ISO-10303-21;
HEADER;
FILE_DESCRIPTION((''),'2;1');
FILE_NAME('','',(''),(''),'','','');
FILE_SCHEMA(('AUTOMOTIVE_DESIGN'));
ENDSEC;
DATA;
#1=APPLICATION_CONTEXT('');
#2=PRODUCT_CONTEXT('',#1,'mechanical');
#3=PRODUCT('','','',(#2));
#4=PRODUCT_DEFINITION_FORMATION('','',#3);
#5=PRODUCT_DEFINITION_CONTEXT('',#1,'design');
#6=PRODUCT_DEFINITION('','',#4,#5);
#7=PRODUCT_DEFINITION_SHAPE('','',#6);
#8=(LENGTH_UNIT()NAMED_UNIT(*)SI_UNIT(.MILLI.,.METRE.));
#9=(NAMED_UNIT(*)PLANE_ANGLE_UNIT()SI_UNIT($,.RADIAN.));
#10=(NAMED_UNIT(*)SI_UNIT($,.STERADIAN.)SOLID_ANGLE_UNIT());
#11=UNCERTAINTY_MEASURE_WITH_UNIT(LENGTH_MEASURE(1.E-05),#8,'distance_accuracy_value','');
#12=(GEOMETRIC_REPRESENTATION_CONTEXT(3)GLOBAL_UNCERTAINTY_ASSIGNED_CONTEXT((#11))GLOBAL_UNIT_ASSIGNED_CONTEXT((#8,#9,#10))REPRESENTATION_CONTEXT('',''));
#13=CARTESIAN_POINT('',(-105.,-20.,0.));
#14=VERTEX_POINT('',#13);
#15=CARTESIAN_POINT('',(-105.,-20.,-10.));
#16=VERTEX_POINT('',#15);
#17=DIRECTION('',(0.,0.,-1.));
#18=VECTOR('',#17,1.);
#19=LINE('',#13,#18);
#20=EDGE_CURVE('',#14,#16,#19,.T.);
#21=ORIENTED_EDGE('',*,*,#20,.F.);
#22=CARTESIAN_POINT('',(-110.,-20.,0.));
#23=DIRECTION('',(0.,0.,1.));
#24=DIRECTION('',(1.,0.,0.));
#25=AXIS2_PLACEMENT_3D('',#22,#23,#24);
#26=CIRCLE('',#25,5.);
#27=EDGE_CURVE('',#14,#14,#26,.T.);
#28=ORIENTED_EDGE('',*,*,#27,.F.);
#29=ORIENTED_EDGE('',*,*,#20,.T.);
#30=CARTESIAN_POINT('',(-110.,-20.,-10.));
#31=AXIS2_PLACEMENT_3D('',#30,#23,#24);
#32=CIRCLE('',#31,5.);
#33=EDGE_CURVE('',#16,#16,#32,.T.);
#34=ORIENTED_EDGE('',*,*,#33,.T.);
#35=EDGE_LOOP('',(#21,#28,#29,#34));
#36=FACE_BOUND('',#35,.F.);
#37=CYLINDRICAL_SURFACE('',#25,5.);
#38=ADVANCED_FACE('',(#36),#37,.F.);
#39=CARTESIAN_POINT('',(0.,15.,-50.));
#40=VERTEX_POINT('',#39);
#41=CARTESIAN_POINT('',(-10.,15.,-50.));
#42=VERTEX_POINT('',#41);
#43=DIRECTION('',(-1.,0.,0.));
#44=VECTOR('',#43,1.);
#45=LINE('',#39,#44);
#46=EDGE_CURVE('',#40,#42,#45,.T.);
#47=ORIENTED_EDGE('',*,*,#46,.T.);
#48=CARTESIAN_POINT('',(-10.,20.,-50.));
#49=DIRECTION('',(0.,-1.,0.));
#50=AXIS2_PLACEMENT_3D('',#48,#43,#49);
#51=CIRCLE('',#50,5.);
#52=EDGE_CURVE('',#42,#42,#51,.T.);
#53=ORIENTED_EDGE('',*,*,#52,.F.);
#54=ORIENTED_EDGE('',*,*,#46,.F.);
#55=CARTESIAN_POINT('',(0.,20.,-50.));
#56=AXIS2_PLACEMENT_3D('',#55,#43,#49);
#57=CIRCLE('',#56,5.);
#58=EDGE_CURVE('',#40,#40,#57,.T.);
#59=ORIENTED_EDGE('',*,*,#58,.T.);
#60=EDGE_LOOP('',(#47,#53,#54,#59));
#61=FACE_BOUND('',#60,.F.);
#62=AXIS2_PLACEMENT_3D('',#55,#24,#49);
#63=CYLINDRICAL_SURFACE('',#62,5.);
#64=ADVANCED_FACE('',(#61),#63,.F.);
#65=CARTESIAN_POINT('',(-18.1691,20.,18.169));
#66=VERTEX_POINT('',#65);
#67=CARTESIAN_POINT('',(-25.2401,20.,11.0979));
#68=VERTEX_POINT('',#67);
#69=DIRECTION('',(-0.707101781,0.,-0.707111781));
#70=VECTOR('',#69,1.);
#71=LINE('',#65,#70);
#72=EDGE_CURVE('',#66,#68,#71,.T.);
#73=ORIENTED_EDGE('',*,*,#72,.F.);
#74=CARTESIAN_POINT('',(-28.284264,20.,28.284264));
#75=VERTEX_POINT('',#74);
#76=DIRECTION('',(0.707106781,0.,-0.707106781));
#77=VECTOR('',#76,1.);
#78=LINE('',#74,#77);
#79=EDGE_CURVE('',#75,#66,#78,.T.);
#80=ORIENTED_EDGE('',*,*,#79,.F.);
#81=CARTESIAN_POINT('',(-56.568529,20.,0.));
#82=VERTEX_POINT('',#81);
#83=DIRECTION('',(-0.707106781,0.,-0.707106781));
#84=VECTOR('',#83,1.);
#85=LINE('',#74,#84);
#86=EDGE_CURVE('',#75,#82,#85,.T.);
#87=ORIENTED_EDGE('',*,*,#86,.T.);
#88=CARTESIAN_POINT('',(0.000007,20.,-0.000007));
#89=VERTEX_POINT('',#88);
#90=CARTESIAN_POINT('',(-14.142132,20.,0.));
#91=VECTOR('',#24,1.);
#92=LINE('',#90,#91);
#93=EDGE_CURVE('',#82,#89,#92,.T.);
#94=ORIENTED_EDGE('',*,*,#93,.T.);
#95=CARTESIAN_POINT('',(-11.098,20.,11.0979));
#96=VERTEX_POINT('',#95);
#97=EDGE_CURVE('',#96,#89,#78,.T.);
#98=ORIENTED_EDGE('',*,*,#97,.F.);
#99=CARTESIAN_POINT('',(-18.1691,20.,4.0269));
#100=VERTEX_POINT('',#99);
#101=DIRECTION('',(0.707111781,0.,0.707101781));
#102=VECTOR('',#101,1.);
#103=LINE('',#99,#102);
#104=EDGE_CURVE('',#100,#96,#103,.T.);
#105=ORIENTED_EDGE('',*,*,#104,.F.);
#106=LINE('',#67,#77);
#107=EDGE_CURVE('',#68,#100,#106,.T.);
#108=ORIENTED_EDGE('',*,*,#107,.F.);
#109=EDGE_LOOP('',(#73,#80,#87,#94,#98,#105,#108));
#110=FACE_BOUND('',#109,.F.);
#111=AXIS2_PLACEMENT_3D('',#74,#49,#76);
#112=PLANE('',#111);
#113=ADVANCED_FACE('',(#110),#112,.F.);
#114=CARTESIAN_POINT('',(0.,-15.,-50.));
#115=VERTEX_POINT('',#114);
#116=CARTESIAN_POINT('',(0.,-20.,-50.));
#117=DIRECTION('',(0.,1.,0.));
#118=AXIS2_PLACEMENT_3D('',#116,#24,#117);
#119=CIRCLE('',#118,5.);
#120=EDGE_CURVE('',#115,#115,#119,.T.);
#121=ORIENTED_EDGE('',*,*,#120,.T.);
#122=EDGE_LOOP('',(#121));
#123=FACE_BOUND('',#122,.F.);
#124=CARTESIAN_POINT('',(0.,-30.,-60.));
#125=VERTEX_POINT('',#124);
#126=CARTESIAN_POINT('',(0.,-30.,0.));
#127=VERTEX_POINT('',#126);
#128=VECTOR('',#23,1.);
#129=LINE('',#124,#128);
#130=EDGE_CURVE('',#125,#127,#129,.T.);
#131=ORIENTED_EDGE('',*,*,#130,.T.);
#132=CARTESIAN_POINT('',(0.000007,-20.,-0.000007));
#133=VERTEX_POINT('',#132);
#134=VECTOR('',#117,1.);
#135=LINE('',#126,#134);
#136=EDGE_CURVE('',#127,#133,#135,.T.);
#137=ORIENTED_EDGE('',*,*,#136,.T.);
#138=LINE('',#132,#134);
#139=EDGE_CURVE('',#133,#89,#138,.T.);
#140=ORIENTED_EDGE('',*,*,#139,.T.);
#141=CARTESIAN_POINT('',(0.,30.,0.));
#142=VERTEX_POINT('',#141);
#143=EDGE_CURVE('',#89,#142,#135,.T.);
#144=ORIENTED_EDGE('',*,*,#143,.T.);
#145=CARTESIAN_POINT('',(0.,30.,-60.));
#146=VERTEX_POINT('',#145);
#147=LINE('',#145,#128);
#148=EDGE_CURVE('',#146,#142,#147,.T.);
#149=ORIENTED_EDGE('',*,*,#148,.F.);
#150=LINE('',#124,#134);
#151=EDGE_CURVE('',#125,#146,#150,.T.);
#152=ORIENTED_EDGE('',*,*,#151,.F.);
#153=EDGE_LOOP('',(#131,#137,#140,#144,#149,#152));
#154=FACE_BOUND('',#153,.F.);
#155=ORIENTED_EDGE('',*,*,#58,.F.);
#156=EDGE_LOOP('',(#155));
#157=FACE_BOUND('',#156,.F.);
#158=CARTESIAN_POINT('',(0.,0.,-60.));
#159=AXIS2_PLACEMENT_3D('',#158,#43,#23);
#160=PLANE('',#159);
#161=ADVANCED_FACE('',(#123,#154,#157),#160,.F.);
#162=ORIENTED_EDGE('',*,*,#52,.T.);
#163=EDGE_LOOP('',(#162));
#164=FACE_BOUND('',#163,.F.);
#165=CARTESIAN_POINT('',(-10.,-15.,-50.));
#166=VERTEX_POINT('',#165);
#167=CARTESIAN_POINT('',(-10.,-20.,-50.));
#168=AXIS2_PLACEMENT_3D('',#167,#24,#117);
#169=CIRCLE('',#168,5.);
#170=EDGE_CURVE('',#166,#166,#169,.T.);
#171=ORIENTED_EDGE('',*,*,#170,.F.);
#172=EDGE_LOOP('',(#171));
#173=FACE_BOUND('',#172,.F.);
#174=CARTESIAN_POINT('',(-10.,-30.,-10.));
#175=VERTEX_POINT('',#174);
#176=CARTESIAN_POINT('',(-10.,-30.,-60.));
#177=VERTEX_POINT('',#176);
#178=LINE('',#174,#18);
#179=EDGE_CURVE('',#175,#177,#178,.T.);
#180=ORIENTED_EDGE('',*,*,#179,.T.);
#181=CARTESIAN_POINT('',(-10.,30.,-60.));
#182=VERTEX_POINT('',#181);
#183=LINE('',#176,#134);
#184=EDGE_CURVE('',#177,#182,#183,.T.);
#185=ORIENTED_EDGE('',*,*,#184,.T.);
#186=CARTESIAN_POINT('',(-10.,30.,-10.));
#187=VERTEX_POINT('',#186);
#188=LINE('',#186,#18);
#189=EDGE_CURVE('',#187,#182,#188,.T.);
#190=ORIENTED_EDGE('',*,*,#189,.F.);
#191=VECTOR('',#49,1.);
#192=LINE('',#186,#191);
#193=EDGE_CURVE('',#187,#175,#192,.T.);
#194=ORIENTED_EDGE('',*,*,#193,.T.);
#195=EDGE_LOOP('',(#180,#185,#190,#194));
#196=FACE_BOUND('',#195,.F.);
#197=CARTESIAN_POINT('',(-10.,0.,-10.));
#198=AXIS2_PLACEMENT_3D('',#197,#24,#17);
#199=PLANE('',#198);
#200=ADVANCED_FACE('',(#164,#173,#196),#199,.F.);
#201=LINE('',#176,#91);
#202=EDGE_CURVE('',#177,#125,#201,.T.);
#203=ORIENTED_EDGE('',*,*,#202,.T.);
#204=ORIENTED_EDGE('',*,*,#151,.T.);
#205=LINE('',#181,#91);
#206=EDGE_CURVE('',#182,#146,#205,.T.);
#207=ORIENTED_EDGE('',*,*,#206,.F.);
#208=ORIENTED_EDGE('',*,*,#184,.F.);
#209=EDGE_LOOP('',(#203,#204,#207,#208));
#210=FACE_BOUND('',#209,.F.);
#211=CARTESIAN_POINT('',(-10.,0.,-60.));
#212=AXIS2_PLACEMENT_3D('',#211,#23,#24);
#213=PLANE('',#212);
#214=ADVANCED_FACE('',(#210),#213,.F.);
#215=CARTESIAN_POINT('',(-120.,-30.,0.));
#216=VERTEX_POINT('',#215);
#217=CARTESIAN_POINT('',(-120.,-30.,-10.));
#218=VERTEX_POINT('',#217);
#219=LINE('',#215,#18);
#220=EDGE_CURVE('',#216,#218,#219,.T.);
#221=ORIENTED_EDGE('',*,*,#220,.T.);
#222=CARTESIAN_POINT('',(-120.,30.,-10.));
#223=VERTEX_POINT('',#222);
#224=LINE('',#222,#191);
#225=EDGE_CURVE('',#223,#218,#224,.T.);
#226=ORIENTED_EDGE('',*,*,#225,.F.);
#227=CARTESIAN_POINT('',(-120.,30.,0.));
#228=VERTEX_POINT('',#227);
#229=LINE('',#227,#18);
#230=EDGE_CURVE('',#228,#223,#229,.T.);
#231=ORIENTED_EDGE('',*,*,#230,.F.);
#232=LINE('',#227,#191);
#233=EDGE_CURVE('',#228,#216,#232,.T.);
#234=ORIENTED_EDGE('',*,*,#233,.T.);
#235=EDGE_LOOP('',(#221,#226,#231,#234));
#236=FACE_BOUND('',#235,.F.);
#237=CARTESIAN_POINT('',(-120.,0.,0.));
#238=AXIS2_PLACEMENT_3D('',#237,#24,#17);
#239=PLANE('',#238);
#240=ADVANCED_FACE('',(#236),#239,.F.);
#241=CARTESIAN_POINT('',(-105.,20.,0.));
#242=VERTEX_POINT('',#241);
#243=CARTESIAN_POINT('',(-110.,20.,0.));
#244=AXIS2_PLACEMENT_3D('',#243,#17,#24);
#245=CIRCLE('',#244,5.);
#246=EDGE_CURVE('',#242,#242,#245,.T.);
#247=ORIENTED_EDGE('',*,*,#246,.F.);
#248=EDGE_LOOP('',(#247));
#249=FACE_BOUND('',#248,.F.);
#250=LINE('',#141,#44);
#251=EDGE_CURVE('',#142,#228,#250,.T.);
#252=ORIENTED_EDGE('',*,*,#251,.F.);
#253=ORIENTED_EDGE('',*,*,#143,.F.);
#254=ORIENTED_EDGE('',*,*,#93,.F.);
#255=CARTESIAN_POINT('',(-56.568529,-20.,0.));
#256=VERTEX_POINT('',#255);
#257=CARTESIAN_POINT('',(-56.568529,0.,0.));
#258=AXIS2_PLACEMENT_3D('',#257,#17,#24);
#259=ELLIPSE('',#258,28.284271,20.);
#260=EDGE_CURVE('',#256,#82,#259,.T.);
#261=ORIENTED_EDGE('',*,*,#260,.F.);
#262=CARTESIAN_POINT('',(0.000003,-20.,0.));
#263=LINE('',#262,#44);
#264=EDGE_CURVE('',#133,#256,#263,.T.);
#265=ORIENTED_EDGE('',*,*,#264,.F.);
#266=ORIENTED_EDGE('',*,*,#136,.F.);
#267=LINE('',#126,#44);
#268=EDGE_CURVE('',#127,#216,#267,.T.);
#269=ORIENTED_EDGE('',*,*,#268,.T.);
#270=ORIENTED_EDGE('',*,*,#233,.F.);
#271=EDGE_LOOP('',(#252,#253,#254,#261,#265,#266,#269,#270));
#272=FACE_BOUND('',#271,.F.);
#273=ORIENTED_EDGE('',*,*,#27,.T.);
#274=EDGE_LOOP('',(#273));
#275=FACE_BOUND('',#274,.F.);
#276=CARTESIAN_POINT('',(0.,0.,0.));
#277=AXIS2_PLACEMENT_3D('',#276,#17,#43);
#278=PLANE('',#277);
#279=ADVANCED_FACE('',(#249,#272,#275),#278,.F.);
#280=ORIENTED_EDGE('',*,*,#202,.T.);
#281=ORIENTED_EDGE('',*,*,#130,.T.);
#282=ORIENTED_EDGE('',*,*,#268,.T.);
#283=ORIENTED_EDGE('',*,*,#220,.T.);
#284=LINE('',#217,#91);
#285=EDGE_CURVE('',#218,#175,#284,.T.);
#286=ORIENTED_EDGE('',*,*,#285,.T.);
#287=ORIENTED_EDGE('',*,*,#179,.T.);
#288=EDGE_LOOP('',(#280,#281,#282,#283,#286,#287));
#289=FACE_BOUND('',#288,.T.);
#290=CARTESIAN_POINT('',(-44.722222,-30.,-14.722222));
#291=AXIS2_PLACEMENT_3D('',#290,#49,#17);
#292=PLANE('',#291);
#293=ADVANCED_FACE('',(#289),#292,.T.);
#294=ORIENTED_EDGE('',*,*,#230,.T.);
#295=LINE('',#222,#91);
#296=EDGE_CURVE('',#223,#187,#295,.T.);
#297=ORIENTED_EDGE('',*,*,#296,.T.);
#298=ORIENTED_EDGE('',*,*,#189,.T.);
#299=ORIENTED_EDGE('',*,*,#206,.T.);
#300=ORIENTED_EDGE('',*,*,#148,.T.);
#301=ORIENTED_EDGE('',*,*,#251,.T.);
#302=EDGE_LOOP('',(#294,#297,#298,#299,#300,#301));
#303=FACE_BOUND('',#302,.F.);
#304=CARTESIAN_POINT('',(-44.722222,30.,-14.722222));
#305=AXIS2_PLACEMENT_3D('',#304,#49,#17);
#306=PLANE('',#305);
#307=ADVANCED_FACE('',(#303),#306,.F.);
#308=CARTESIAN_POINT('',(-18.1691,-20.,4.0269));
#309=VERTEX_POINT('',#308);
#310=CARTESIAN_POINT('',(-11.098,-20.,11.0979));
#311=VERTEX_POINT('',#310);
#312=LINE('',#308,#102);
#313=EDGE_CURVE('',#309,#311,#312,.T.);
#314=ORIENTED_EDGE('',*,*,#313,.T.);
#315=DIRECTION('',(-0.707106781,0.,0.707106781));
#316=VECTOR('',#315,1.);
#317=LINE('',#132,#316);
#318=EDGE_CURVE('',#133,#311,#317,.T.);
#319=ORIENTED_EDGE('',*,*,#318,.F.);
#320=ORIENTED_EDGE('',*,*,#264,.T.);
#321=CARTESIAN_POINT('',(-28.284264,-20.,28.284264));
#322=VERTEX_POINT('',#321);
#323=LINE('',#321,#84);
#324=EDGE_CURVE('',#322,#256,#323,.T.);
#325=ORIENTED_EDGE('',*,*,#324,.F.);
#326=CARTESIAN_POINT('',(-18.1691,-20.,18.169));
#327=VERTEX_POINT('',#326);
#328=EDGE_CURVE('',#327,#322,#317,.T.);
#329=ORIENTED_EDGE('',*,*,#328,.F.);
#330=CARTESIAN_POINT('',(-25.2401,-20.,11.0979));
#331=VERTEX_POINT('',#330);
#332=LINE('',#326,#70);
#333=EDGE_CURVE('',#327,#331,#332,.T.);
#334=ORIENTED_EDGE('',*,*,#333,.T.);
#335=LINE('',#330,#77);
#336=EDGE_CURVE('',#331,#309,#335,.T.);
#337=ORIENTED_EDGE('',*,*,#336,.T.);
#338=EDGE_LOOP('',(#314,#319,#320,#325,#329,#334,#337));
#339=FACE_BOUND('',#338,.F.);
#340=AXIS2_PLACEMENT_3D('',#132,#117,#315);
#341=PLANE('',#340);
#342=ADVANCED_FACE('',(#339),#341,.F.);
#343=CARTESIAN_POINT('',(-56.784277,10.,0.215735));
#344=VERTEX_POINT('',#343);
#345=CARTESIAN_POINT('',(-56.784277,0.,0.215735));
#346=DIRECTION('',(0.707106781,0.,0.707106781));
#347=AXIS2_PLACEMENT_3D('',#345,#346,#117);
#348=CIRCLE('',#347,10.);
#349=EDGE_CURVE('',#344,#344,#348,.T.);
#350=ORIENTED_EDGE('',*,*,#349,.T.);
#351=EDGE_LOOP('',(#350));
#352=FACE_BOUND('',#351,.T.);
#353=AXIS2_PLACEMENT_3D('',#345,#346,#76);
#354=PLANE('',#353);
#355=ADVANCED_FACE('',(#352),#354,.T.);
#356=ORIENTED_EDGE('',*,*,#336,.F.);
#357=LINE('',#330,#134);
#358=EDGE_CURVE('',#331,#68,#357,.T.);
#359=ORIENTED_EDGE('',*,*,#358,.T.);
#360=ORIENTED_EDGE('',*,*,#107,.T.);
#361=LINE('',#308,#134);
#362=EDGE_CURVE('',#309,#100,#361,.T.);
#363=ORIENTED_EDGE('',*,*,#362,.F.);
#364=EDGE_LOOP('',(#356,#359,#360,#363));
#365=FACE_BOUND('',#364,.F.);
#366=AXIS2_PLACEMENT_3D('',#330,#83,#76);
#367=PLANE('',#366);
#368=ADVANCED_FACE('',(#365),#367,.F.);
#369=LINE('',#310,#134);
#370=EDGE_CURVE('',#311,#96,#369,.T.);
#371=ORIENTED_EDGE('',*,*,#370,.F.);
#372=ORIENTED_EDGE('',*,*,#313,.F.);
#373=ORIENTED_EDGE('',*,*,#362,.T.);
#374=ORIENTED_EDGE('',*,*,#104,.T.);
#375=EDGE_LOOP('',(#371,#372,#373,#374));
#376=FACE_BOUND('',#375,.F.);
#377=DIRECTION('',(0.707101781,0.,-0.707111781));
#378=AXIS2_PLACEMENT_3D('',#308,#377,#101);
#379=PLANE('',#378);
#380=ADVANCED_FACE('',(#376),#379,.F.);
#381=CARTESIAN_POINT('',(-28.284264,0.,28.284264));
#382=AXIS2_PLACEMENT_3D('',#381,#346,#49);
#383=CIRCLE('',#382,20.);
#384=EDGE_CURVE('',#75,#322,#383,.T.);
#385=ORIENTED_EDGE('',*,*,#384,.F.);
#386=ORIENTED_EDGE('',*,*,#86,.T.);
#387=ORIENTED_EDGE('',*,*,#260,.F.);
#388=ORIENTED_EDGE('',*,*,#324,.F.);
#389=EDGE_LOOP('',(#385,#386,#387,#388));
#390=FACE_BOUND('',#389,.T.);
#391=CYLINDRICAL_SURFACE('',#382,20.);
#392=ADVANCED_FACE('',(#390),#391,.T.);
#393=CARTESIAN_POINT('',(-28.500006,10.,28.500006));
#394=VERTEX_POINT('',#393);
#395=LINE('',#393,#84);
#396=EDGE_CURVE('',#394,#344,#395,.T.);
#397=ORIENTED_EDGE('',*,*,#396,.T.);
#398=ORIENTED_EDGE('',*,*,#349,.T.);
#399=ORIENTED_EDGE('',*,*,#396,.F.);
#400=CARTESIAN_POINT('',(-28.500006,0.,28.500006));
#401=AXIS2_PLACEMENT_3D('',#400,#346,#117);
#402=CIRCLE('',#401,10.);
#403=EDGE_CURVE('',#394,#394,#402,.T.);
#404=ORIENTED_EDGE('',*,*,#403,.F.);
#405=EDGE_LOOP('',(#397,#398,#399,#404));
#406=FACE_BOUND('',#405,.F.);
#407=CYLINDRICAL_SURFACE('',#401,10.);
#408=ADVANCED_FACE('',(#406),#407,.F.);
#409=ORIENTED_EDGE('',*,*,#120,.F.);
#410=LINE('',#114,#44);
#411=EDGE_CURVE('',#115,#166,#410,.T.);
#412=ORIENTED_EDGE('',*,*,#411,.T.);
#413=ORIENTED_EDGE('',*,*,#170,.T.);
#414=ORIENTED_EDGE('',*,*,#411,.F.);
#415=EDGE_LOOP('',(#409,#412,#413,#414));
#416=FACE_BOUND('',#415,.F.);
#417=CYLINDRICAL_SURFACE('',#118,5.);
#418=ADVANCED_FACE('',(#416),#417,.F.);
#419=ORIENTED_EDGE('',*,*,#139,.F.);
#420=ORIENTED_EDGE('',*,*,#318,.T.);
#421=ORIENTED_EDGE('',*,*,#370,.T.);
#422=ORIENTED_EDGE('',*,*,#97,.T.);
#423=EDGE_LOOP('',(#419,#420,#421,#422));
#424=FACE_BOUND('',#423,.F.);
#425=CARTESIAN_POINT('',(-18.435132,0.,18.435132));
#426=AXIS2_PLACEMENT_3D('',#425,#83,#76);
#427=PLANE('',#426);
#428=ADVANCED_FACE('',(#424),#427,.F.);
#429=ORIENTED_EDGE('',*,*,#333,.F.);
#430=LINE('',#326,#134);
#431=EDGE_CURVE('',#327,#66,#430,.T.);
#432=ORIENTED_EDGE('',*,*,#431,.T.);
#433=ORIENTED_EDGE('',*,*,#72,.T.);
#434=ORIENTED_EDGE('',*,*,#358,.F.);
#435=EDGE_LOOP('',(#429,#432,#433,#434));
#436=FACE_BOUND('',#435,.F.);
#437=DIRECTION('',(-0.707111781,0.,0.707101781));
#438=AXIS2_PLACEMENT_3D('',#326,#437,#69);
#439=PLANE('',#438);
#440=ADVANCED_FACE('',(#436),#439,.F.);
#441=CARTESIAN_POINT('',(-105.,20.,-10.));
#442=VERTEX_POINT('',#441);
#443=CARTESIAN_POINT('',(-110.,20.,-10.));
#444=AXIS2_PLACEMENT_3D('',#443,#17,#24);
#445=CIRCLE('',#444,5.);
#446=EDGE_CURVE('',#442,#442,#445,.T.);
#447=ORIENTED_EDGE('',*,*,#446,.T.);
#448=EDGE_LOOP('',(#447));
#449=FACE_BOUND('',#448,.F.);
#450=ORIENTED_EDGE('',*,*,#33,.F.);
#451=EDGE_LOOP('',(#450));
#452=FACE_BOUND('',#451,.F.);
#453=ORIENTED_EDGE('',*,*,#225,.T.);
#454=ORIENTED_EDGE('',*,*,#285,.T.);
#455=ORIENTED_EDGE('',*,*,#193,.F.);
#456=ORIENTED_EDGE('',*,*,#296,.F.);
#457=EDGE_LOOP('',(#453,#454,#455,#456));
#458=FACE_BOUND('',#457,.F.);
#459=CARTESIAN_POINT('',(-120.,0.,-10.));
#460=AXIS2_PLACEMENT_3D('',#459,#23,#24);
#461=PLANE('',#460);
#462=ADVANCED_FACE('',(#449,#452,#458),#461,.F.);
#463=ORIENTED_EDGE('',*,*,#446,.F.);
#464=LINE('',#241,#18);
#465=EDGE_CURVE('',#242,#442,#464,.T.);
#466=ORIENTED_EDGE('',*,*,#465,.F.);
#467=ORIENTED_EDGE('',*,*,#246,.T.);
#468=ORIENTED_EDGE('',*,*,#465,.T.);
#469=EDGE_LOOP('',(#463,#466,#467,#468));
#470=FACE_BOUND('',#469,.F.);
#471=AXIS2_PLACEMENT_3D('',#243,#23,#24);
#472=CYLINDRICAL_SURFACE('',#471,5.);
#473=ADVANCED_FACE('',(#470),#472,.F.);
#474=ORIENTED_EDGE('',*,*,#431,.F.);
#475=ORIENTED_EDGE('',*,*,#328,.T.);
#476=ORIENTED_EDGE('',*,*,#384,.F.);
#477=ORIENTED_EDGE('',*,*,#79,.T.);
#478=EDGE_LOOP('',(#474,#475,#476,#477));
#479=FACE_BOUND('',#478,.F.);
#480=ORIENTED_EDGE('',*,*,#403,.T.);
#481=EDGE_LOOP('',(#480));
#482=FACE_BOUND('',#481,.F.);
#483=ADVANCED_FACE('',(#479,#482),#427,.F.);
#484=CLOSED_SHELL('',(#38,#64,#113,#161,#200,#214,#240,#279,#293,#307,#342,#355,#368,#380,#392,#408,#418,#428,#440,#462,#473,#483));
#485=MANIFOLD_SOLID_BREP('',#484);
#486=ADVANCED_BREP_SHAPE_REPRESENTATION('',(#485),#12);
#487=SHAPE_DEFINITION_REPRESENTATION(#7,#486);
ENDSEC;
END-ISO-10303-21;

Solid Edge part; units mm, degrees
sketch "Sketch1" plane through (0, 0, 0) normal (0, -1, 0) x (1, 0, 0)
  line L0 (0, 0) -> (-120, 0)
  line L1 (-120, 0) -> (-120, -10)
  line L2 (-120, -10) -> (-10, -10)
  line L3 (-10, -10) -> (-10, -60)
  line L4 (-10, -60) -> (0, -60)
  line L5 (0, -60) -> (0, 0)
extrude "Protrusion1" add sketch "Sketch1" along normal mid plane 60
sketch "Sketch2" plane through (-42.4264, 0, 42.4264) normal (0.7071068, 0, 0.7071068) x (0, -1, 0)
  line L0 (20, 60) -> (20, 20)
  line L1 (0, 60) -> (20, 60)
  line L2 (-20, 60) -> (0, 60)
  line L3 (-20, 20) -> (-20, 60)
  arc A0 (-20, 20) -> (20, 20) centre (0, 20) ccw
extrude "Protrusion2" add sketch "Sketch2" against normal up to next
sketch "Sketch3" plane through (-21.2132, 0, 21.2132) normal (0.7071068, 0, 0.7071068) x (0, 1, 0)
  circle A0 centre (0, 10.3051) radius 10
extrude "ExtrudedCutout_1" cut sketch "Sketch3" against normal blind 40
sketch "Sketch4" plane through (-28.2843, -20, 14.1421) normal (0, -1, 0) x (1, 0, 0)
  line L0 (10.1152, 4.0269) -> (3.0442, -3.0442)
  line L1 (3.0442, -3.0442) -> (10.1152, -10.1152)
  line L2 (10.1152, -10.1152) -> (17.1863, -3.0442)
  line L3 (17.1863, -3.0442) -> (10.1152, 4.0269)
extrude "Cutout1" cut sketch "Sketch4" against normal up to surface (40 mm away)
sketch "Sketch5" plane through (-60, 0, 0) normal (0, 0, 1) x (1, 0, 0)
  circle A0 centre (-50, -20) radius 5
extrude "Cutout2" cut sketch "Sketch5" against normal up to surface (10 mm away)
sketch "Sketch6" plane through (0, 0, -30) normal (1, 0, 0) x (0, 1, 0)
  circle A0 centre (-20, -20) radius 5
extrude "Cutout3" cut sketch "Sketch6" against normal up to surface (10 mm away)
mirror "Mirror1" about plane through (0, 0, 0) normal (0, -1, 0) of "Cutout2", "Cutout3"
